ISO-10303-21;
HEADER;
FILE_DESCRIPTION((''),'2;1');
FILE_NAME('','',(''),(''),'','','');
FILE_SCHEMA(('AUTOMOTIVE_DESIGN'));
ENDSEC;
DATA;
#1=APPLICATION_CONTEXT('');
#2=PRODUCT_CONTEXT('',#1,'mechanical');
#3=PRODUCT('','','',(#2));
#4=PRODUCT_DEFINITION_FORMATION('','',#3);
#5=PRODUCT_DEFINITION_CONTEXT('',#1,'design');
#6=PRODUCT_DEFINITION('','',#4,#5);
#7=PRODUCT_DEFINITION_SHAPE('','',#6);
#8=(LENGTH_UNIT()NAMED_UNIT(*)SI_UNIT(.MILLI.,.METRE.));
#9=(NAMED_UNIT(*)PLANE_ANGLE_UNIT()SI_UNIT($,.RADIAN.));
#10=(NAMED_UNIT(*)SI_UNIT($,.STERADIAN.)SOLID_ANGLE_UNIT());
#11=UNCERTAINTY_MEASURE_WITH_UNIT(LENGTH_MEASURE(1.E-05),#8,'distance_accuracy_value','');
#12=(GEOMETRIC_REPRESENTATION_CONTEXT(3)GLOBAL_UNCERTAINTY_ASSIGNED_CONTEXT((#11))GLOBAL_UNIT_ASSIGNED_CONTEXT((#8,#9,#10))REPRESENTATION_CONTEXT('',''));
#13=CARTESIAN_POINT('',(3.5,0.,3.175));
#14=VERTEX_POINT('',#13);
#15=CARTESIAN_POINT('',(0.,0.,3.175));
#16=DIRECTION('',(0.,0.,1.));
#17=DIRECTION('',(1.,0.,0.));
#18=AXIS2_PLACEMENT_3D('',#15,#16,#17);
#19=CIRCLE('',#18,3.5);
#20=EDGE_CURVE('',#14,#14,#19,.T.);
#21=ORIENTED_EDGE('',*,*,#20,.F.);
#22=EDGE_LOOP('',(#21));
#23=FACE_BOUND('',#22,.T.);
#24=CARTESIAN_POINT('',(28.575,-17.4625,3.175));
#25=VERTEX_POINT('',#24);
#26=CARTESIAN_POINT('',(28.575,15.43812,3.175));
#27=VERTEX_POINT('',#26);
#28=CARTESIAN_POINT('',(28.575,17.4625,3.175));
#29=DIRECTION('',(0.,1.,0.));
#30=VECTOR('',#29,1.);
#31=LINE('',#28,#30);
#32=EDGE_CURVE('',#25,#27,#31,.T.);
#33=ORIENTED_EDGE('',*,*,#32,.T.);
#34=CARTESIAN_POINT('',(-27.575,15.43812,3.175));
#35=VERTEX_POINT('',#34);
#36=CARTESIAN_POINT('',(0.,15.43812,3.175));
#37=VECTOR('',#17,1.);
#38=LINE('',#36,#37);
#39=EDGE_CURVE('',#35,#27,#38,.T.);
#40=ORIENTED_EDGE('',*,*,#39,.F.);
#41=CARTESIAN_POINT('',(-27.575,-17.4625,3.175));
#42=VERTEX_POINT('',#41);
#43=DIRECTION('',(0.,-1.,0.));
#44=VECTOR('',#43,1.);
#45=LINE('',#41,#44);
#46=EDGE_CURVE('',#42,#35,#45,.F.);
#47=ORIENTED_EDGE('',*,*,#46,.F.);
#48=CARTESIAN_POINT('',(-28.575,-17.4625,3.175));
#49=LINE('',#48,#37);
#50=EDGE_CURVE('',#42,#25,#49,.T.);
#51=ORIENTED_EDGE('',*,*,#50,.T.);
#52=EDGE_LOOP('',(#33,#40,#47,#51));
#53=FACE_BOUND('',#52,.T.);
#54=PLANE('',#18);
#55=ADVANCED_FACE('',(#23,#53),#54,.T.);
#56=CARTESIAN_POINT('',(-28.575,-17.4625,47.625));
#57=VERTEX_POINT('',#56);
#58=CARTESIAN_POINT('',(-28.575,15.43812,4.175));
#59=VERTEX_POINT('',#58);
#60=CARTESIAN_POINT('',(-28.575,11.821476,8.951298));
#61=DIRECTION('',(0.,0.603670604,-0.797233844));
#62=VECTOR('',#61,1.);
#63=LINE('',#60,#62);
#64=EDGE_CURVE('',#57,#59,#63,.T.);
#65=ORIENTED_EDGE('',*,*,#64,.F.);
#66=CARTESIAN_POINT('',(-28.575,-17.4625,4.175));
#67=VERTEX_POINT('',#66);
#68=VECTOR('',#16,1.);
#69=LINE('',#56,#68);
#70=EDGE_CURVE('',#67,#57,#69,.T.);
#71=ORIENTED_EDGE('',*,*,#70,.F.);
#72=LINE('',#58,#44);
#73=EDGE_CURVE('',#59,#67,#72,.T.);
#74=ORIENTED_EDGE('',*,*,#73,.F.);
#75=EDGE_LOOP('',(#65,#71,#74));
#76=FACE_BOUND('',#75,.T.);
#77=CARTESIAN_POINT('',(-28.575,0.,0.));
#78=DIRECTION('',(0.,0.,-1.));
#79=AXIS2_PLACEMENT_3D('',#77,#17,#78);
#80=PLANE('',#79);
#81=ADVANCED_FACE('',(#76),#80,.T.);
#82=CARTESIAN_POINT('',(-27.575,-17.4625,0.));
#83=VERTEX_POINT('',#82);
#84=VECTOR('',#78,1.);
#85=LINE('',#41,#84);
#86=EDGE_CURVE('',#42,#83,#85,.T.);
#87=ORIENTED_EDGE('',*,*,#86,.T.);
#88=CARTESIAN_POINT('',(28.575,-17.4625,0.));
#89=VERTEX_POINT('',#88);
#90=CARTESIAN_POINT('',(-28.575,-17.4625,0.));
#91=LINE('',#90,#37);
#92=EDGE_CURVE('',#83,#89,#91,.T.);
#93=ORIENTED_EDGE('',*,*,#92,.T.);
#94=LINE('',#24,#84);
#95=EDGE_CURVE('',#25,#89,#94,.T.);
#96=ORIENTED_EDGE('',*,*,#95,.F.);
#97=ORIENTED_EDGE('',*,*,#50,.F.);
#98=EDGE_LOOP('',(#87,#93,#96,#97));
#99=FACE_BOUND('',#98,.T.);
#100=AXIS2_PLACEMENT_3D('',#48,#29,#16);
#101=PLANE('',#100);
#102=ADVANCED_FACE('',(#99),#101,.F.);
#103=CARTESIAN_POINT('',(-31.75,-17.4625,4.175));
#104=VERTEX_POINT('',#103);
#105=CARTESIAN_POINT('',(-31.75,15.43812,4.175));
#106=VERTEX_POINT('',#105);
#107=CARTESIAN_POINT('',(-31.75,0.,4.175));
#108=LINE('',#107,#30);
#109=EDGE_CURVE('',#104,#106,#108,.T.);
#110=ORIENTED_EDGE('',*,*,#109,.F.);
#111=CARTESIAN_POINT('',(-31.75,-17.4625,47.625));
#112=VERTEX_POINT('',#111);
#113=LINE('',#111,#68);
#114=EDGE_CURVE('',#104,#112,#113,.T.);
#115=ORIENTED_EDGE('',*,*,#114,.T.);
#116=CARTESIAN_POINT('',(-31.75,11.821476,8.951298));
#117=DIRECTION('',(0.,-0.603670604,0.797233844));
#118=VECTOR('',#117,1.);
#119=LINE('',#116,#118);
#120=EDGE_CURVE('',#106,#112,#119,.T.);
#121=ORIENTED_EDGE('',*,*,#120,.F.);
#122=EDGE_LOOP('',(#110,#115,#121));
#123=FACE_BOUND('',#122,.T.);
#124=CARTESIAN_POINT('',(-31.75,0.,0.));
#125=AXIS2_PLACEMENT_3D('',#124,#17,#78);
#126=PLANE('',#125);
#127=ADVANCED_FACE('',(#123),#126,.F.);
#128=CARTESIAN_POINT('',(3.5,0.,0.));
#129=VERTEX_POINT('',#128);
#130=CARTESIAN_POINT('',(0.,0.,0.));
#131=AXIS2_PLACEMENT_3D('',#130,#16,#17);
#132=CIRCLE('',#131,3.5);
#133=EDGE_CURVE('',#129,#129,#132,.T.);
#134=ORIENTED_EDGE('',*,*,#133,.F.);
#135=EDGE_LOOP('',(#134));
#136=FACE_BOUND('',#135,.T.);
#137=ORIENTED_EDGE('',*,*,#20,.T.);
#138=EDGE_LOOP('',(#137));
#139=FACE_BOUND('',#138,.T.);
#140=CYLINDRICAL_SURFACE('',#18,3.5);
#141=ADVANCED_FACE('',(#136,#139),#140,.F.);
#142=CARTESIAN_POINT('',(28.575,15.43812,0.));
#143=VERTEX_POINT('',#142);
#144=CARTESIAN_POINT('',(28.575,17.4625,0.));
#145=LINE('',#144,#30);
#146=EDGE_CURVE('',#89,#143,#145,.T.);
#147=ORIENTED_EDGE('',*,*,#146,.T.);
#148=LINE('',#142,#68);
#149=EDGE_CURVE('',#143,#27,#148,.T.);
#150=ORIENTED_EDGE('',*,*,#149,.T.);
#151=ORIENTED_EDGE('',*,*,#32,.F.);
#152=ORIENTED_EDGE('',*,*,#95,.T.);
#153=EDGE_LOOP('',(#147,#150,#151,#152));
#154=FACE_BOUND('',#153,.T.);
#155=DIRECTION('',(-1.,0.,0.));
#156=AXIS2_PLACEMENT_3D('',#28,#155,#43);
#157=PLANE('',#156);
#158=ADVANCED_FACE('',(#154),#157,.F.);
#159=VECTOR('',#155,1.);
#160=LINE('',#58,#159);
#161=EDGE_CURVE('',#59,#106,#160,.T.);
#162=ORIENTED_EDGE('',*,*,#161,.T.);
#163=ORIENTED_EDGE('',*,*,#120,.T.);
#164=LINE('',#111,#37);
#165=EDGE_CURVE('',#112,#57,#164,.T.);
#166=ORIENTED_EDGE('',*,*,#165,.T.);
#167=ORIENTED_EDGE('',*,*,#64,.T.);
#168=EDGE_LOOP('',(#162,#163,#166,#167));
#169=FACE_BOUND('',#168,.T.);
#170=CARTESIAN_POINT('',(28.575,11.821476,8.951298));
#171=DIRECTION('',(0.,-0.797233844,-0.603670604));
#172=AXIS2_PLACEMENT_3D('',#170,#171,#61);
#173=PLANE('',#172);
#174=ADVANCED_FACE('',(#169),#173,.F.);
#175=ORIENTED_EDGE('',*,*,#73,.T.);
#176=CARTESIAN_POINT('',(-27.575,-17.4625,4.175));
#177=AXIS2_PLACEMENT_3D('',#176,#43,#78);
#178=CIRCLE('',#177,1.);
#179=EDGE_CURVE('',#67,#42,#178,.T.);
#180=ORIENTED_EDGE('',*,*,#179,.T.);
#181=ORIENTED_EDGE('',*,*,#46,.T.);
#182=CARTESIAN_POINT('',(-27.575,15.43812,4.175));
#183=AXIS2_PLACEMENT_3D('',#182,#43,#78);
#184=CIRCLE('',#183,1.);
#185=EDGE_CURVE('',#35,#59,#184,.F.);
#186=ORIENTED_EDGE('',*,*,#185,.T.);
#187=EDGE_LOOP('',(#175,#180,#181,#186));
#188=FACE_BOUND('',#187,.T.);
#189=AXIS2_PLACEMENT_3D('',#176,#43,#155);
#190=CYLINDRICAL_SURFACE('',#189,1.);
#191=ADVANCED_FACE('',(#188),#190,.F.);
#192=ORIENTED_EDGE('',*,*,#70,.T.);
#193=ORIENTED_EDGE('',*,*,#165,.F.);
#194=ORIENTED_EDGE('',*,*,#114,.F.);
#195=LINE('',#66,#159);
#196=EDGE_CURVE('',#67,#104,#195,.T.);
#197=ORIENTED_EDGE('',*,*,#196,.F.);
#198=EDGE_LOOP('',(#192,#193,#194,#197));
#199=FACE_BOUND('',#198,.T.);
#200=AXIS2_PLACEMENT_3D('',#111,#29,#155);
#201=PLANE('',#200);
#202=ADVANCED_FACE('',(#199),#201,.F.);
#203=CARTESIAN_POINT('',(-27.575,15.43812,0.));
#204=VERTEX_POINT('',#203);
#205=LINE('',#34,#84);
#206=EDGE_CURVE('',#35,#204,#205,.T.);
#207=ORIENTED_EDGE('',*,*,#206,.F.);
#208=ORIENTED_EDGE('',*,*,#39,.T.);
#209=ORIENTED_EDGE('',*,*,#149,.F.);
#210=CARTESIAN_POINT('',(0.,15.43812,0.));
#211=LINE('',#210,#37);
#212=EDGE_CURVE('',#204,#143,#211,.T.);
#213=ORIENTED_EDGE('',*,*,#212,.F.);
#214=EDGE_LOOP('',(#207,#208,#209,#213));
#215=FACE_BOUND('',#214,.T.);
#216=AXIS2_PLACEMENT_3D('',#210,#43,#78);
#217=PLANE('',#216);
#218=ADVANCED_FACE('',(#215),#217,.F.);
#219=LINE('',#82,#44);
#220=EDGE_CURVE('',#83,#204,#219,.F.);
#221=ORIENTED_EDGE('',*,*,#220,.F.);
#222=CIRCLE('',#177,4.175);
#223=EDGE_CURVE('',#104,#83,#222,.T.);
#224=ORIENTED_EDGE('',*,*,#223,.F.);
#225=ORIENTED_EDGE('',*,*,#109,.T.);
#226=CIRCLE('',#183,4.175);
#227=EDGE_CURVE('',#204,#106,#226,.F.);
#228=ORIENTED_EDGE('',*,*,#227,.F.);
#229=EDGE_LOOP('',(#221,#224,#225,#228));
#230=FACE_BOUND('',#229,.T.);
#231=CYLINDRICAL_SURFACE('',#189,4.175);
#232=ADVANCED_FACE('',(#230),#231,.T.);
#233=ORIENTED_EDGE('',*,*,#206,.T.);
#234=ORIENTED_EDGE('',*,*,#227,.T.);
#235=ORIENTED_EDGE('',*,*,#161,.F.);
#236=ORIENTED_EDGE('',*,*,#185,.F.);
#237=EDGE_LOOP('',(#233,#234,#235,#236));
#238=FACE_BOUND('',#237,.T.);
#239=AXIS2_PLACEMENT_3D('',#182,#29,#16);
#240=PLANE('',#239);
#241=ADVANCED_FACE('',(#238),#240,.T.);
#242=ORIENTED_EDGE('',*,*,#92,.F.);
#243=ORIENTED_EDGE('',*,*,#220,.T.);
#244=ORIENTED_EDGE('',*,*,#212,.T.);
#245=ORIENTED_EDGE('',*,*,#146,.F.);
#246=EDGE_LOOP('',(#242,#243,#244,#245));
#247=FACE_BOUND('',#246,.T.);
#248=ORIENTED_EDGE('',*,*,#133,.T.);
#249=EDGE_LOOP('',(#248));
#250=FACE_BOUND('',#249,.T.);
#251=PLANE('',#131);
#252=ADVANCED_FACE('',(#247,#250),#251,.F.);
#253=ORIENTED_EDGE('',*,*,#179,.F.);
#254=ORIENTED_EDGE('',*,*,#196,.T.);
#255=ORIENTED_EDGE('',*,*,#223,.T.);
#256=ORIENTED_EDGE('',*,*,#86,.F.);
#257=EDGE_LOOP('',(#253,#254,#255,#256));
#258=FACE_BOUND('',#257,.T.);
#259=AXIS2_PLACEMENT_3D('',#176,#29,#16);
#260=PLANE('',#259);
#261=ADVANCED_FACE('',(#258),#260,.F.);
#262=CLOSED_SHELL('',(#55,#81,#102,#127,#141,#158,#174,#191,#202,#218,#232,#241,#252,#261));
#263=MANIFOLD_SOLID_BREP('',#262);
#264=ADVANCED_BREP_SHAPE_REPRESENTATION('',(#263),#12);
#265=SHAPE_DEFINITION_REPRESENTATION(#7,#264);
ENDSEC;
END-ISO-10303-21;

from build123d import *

# Parameters (mm, degrees)
SKETCH2_W                    = 57.15
SKETCH2_H                    = 34.925
BASE_FLANGE1_DEPTH           = 3.175
SKETCH23_W                   = 57.15
SKETCH23_H                   = 2.02438
CUT_EXTRUDE3_DEPTH           = 34.638521909
M6_CLEARANCE_HOLE1_D         = 7
EDGE_FLANGE2_STRIP_W         = 14.7
EDGE_FLANGE2_STRIP_H         = 3.175
EDGE_FLANGE2_STRIP_CUT_DEPTH = 32.90062
EDGE_FLANGE2_DEPTH           = 32.90062
CUT_EXTRUDE2_DEPTH           = 79.817416579


# Sheet-metal steps are written as plain solids
with BuildPart() as part:
    # Sketch2 → Base-Flange1 (new body)
    with BuildSketch(Plane.XY):
        Rectangle(SKETCH2_W, SKETCH2_H)
    extrude(amount=BASE_FLANGE1_DEPTH)

    # Sketch23 → Cut-Extrude3 (cut, through all)
    with BuildSketch(Plane.XY.offset(3.175)):
        with Locations((0, 16.45031)):
            Rectangle(SKETCH23_W, SKETCH23_H)
    extrude(amount=-CUT_EXTRUDE3_DEPTH, mode=Mode.SUBTRACT)

    # M6 Clearance Hole1 (through all)
    with Locations(Plane.XY.offset(3.175)):
        with Locations((0, 0)):
            Hole(M6_CLEARANCE_HOLE1_D / 2)

    # Edge-Flange2 strip (across the edge) → Edge-Flange2 strip cut (cut)
    with BuildSketch(Plane(origin=(-28.575, 15.43812, 3.175), x_dir=(1, 0, 0), z_dir=(0, -1, 0))):
        with Locations((-6.35, -1.5875)):
            Rectangle(EDGE_FLANGE2_STRIP_W, EDGE_FLANGE2_STRIP_H)
    extrude(amount=EDGE_FLANGE2_STRIP_CUT_DEPTH, mode=Mode.SUBTRACT)

    # Edge-Flange2 section (across the edge) → Edge-Flange2 (add)
    with BuildSketch(Plane(origin=(-28.575, 15.43812, 3.175), x_dir=(1, 0, 0), z_dir=(0, -1, 0))):
        with BuildLine():
            Line((-3.175, 1), (-3.175, 44.45))
            Line((-3.175, 44.45), (0, 44.45))
            Line((0, 44.45), (0, 1))
            ThreePointArc((0, 1), (0.292893219, 0.292893219), (1, 0))
            Line((1, 0), (1, -3.175))
            ThreePointArc((1, -3.175), (-1.952170811, -1.952170811), (-3.175, 1))
        make_face()
    extrude(amount=EDGE_FLANGE2_DEPTH)

    # Sketch20 → Cut-Extrude2 (cut, through all)
    with BuildSketch(Plane.ZY.offset(31.75)):
        Polygon((4.175, 15.43812), (47.625, -17.4625), (47.625, 15.43812), align=None)
    extrude(amount=-CUT_EXTRUDE2_DEPTH, mode=Mode.SUBTRACT)


solid = part.part
